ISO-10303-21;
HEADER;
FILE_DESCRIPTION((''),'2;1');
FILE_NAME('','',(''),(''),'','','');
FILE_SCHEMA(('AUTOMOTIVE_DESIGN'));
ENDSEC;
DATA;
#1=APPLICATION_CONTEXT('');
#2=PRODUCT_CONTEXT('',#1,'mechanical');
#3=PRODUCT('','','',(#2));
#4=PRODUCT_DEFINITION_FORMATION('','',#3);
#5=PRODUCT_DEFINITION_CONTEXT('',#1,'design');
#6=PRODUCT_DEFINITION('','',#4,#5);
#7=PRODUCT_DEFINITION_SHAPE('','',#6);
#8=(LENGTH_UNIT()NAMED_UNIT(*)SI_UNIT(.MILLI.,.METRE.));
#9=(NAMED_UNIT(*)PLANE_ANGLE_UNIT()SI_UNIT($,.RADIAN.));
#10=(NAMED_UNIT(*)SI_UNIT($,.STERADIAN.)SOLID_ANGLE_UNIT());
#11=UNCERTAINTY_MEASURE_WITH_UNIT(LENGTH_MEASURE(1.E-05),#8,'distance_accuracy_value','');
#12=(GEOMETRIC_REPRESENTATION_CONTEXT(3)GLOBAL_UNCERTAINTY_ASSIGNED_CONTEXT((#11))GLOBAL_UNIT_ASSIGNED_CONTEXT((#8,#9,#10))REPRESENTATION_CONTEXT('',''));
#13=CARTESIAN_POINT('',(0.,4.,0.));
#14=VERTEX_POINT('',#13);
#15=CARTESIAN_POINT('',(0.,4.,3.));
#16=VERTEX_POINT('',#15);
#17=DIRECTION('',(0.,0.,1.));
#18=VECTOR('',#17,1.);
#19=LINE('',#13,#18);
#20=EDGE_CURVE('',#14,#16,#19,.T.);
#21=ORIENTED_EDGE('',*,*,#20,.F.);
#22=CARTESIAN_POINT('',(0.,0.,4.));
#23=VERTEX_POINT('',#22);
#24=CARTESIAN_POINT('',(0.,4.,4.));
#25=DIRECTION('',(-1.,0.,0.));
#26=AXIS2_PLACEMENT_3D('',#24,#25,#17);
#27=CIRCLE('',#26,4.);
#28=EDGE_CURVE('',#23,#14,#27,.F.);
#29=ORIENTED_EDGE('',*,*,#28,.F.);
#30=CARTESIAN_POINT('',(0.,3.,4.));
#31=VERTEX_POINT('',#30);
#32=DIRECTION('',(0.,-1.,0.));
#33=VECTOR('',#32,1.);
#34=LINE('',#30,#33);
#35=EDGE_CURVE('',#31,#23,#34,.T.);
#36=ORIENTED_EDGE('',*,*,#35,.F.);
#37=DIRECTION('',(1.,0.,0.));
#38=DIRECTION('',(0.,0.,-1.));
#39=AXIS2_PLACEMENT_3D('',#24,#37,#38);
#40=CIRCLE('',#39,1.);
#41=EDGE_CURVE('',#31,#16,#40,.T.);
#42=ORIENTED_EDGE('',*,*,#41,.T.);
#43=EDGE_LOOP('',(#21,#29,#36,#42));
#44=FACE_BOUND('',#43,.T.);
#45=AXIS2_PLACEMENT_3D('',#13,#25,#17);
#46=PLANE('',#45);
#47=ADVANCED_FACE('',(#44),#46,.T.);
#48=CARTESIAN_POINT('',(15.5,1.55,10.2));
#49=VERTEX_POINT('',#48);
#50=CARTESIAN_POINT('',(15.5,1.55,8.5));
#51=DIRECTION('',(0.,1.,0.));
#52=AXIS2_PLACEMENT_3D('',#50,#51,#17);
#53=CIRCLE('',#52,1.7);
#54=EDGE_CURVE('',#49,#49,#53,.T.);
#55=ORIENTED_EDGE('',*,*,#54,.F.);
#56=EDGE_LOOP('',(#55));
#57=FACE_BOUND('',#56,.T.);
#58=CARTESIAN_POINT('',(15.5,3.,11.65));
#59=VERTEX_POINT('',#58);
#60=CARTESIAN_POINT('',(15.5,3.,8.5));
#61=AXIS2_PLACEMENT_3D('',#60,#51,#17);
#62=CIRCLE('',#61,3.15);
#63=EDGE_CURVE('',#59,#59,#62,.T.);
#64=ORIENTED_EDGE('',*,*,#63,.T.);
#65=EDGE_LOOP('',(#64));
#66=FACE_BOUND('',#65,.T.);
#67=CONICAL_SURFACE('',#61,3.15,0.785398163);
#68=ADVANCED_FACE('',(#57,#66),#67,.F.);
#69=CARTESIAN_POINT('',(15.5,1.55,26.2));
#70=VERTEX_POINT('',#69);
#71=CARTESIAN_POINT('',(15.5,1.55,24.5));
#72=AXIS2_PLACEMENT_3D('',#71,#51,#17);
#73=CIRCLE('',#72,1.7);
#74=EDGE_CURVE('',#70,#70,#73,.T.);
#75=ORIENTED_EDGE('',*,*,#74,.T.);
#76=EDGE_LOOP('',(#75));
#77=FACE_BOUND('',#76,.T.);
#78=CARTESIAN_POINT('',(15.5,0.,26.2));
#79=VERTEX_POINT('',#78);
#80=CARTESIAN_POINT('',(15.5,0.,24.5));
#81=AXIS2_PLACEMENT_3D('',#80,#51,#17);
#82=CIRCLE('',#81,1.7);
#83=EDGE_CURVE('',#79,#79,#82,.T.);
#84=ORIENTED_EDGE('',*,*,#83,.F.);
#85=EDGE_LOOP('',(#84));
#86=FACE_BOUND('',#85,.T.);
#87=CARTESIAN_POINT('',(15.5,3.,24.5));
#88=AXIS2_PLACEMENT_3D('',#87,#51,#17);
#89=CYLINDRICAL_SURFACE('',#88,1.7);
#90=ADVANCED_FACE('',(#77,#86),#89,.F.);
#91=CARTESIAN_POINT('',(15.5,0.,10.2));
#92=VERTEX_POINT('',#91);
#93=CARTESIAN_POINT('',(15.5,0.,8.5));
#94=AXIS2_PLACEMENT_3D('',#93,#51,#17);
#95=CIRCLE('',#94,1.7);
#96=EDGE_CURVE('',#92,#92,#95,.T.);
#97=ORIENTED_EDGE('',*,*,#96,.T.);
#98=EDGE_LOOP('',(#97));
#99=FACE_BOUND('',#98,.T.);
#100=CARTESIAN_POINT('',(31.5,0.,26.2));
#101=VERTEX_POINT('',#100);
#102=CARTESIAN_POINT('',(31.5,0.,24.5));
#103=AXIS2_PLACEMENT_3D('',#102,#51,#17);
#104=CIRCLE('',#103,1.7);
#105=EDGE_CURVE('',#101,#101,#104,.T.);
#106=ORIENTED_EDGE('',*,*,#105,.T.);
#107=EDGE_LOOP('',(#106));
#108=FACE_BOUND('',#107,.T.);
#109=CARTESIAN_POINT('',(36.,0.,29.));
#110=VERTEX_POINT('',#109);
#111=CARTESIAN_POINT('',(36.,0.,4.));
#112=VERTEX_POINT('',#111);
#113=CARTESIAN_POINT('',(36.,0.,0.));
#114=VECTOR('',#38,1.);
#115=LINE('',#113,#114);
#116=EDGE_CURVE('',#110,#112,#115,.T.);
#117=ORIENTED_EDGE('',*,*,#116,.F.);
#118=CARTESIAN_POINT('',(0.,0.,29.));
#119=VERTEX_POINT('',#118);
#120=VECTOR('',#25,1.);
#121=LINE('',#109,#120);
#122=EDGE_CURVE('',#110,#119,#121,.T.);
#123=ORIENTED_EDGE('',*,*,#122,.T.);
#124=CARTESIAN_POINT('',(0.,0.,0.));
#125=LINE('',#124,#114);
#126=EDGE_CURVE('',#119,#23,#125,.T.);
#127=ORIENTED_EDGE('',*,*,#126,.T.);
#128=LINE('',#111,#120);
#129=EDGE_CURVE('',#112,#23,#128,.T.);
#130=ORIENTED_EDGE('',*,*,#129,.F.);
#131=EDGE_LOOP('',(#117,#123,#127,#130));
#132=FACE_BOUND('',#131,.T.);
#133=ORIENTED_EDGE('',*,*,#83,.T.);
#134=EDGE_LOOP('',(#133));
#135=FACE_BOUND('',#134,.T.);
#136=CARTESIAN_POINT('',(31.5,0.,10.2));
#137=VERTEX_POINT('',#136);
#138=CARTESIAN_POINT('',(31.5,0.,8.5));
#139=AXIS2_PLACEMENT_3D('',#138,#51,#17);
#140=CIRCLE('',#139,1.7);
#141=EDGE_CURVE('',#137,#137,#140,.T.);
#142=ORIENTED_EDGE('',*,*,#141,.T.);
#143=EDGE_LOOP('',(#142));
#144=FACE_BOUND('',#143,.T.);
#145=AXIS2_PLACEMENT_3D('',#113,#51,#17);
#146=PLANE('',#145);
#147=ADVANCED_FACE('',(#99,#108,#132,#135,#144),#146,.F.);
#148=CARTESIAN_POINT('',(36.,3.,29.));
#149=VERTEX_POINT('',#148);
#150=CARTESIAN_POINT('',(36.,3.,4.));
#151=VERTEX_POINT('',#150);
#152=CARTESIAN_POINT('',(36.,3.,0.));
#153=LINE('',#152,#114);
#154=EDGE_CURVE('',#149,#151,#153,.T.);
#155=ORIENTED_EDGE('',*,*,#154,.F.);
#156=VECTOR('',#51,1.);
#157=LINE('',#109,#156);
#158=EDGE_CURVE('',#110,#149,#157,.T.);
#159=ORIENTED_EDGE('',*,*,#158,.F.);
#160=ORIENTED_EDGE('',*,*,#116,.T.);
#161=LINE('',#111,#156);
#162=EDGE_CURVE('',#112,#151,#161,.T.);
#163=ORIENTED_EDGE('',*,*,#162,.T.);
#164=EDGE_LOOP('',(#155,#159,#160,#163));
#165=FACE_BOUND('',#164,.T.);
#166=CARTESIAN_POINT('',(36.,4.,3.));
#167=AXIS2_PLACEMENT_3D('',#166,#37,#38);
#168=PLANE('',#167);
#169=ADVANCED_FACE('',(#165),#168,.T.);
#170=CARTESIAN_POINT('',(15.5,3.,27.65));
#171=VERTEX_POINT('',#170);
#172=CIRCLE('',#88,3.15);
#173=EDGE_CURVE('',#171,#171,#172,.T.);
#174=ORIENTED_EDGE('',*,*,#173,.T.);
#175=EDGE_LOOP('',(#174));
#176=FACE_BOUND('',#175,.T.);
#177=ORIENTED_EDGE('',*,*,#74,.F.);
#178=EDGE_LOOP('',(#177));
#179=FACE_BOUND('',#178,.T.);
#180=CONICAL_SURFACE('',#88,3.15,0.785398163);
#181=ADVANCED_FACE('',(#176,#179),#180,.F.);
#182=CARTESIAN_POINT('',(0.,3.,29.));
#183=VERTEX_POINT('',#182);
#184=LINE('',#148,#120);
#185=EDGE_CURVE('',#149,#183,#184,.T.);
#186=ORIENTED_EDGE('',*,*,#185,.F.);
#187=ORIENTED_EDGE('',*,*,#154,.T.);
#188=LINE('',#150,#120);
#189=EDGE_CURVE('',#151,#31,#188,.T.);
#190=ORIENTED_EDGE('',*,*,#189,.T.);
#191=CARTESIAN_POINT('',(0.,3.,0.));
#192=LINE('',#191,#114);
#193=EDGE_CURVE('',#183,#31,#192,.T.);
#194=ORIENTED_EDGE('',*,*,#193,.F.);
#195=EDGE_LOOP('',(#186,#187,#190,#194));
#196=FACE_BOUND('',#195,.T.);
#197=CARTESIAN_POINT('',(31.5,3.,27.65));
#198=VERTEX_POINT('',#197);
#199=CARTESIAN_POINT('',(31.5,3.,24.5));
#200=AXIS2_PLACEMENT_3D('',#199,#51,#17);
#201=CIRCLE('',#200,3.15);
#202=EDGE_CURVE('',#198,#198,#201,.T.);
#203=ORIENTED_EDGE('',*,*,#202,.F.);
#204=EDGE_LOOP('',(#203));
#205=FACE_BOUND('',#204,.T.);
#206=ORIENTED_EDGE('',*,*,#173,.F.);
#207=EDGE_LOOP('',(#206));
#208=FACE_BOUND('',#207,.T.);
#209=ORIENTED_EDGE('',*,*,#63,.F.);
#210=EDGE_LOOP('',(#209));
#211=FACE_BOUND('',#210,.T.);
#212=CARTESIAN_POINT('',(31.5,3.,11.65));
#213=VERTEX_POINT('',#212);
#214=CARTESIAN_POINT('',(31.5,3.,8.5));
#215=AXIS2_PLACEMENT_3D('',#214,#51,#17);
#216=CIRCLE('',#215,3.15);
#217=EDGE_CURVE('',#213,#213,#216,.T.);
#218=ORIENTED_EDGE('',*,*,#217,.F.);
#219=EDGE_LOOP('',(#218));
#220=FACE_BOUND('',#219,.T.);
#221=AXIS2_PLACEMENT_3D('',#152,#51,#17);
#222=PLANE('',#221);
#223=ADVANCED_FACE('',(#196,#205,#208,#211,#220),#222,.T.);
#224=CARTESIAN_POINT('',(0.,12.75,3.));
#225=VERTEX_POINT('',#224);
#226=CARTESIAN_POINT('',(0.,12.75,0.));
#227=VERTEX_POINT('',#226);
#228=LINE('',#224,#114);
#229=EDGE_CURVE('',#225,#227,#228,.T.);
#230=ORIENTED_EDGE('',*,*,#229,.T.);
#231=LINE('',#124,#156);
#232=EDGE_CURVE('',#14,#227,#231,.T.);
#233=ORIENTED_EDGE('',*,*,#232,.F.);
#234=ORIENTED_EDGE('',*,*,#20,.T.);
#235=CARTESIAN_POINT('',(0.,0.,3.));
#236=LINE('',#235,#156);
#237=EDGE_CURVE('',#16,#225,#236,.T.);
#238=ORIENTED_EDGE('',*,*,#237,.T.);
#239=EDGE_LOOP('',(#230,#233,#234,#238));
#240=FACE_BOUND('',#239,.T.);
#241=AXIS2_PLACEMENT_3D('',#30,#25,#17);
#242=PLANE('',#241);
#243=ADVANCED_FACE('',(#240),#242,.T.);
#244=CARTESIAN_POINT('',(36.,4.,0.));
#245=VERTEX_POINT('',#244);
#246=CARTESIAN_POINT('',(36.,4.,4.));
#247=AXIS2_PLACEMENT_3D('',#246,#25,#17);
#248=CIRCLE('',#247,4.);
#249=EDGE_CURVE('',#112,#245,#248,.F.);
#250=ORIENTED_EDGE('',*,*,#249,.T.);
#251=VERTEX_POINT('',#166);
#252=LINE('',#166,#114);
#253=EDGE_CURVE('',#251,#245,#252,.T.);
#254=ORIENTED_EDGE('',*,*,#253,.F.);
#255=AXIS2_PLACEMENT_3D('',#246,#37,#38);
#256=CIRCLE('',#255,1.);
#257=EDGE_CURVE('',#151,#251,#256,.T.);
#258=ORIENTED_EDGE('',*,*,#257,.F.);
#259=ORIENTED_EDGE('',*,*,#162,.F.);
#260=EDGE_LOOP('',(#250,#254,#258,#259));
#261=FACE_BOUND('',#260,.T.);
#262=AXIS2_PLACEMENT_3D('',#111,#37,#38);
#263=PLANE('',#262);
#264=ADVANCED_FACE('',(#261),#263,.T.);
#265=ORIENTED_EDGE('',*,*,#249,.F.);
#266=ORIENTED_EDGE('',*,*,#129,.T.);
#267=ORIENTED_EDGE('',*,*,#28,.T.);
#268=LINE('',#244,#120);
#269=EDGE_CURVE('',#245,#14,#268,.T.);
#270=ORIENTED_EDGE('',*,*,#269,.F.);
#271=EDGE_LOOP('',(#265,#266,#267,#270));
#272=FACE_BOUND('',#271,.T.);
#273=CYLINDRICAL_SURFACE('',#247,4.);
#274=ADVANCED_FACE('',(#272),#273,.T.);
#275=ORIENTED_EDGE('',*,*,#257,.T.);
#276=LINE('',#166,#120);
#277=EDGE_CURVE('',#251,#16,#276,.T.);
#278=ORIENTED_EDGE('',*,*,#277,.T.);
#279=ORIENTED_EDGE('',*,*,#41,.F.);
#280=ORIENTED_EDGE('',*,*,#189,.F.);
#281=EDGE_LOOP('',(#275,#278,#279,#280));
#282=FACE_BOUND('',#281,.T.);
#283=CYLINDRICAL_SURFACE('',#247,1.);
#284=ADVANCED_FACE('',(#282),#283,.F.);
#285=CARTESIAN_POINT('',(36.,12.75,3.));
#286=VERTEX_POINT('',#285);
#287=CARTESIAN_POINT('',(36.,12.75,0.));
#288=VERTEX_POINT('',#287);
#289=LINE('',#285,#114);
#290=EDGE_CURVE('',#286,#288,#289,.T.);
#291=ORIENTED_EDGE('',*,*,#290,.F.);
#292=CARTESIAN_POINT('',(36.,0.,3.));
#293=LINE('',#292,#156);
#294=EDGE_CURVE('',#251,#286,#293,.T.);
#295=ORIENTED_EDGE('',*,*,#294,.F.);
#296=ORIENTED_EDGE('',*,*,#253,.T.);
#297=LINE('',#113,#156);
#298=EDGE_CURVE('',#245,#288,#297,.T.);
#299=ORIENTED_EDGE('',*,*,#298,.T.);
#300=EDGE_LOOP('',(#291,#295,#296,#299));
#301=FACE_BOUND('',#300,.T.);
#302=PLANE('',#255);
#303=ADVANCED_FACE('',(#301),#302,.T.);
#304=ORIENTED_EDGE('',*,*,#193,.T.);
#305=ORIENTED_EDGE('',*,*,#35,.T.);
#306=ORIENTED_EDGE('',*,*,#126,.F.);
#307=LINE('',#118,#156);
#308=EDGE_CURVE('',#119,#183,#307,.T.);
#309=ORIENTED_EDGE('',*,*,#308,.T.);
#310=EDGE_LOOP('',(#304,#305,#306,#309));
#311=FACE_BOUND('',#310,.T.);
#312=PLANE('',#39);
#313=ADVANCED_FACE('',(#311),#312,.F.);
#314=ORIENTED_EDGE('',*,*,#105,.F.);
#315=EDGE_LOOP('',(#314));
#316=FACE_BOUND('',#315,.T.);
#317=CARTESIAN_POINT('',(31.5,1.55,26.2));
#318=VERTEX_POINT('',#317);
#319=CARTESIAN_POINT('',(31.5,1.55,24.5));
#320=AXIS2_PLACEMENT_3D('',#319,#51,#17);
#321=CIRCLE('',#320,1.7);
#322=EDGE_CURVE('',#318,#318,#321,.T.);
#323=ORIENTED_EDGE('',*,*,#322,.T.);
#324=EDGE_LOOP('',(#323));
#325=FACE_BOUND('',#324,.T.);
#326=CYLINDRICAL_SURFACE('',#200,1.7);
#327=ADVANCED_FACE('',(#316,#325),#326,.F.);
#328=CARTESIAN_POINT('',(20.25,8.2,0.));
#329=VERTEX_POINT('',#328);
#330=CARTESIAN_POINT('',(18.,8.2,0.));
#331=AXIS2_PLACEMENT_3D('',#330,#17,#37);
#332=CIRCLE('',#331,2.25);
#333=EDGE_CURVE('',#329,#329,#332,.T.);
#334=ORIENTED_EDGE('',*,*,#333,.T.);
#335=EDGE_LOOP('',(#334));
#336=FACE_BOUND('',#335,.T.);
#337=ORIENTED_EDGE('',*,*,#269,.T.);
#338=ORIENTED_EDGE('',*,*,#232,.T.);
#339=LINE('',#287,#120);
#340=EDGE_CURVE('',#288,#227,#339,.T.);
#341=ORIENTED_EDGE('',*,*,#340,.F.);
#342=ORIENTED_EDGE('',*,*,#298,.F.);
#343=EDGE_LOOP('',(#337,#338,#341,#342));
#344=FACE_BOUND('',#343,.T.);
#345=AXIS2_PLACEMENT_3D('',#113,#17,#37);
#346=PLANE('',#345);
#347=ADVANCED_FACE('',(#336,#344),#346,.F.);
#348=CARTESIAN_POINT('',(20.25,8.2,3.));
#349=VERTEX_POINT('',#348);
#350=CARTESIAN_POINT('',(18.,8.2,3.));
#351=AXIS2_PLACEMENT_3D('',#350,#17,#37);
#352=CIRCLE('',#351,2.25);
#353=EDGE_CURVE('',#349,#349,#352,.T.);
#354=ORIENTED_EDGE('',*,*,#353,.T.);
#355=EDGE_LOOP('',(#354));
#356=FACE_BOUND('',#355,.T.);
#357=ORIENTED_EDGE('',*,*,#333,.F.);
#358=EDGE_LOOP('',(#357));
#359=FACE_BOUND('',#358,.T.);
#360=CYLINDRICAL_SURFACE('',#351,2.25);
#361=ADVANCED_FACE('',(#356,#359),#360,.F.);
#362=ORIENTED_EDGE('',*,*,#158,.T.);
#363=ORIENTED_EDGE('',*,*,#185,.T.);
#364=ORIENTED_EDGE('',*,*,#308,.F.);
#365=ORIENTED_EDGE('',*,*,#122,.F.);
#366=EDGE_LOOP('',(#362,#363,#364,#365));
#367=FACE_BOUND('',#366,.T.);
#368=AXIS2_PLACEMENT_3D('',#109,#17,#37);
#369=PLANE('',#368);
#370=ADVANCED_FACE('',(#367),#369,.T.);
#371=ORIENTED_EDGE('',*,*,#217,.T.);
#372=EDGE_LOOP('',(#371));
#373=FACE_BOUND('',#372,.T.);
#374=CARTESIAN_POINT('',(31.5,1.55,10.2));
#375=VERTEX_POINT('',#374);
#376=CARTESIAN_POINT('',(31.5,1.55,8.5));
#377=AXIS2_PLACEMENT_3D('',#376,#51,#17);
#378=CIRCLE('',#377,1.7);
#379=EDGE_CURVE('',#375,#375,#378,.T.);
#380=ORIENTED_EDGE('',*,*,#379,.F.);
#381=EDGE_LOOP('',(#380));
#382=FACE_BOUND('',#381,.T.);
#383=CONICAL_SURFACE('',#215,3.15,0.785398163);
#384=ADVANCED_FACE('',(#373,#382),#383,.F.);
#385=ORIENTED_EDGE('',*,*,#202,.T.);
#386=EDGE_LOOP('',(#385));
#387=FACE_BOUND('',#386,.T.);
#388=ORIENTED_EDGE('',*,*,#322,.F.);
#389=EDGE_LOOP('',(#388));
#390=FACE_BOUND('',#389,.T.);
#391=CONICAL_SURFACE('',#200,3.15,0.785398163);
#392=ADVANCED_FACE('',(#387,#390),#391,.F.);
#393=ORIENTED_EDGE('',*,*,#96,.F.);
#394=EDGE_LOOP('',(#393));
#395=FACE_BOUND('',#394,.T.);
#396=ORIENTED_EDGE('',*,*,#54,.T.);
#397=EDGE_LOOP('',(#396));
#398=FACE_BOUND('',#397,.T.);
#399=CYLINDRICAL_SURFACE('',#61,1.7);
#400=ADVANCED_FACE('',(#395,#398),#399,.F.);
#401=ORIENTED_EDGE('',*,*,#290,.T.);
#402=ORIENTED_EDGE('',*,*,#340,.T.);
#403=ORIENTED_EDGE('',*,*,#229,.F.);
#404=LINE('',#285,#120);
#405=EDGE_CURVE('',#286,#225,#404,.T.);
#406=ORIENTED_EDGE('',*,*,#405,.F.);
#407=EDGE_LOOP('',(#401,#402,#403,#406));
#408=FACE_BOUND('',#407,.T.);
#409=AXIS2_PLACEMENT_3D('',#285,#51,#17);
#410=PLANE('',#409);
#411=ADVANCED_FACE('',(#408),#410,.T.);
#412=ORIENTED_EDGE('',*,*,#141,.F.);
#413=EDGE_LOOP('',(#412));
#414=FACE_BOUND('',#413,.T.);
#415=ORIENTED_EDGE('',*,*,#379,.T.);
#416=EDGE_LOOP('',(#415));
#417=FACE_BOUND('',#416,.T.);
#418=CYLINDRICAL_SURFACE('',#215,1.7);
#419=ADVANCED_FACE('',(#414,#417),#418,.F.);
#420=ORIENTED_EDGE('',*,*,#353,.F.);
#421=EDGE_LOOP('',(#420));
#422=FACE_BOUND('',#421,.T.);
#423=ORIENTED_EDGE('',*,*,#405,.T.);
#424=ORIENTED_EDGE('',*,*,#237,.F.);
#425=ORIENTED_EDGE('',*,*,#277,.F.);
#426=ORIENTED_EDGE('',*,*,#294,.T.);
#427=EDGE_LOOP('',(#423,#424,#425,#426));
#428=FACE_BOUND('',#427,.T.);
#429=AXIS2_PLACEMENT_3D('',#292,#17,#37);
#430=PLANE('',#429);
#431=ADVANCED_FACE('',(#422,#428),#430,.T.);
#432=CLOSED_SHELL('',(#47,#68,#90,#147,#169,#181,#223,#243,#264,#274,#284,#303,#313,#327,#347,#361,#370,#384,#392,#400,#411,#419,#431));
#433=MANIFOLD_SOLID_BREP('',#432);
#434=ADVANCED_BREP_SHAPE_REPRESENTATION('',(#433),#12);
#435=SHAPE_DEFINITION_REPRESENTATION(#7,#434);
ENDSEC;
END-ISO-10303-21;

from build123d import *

# Parameters (mm, degrees)
T_LE_DE_BASE_PLI_E1_DEPTH                   = 36
FRAISAGE_POUR_VIS_T_TE_FRAIS_E_M31_AT_COUNT = 2
FRAISAGE_POUR_VIS_T_TE_FRAIS_E_M31_AT_PITCH = 16
FRAISAGE_POUR_VIS_T_TE_FRAIS_E_M31_2_COUNT  = 2
FRAISAGE_POUR_VIS_T_TE_FRAIS_E_M31_2_PITCH  = 22.627416998
FRAISAGE_POUR_VIS_T_TE_FRAIS_E_M31_3_COUNT  = 2
FRAISAGE_POUR_VIS_T_TE_FRAIS_E_M31_3_PITCH  = 16
D_GAGEMENT_M41_D                            = 4.5


# Sheet-metal steps are written as plain solids
with BuildPart() as part:
    # Esquisse1 → Tôle de base pliée1 (new body)
    with BuildSketch(Plane(origin=(0, 0, 0), x_dir=(0, 0, -1), z_dir=(1, 0, 0))):
        with BuildLine():
            Line((0, 12.75), (0, 4))
            ThreePointArc((0, 4), (-1.171572875, 1.171572875), (-4, 0))
            Line((-4, 0), (-29, 0))
            Line((-29, 0), (-29, 3))
            Line((-29, 3), (-4, 3))
            ThreePointArc((-4, 3), (-3.292893219, 3.292893219), (-3, 4))
            Line((-3, 4), (-3, 12.75))
            Line((-3, 12.75), (0, 12.75))
        make_face()
    extrude(amount=T_LE_DE_BASE_PLI_E1_DEPTH)

    # Esquisse7 → Fraisage pour vis à tête fraisée M31 (revolve, cut)
    with BuildSketch(Plane(origin=(15.5, 3, 24.5), x_dir=(0, 0, 1), z_dir=(1, 0, 0))):
        Polygon((0, 0), (0, 3), (1.7, 3), (1.7, 1.45), (3.15, 0), align=None)
    fraisage_pour_vis_t_te_frais_e_m31 = revolve(axis=Axis((15.5, 9.35, 24.5), (0, -1, 0)), mode=Mode.SUBTRACT)

    # Fraisage pour vis à tête fraisée M31 at: Fraisage pour vis à tête fraisée M31 ×2
    with Locations(*[(0, 0, -i * FRAISAGE_POUR_VIS_T_TE_FRAIS_E_M31_AT_PITCH) for i in range(1, FRAISAGE_POUR_VIS_T_TE_FRAIS_E_M31_AT_COUNT)]):
        add(fraisage_pour_vis_t_te_frais_e_m31, mode=Mode.SUBTRACT)

    # Fraisage pour vis _ t_te frais_e M31 2: Fraisage pour vis à tête fraisée M31 ×2
    with Locations(*[Vector(0.7071067811865476, 0, -0.7071067811865476) * (i * FRAISAGE_POUR_VIS_T_TE_FRAIS_E_M31_2_PITCH) for i in range(1, FRAISAGE_POUR_VIS_T_TE_FRAIS_E_M31_2_COUNT)]):
        add(fraisage_pour_vis_t_te_frais_e_m31, mode=Mode.SUBTRACT)

    # Fraisage pour vis _ t_te frais_e M31 3: Fraisage pour vis à tête fraisée M31 ×2
    with Locations(*[(i * FRAISAGE_POUR_VIS_T_TE_FRAIS_E_M31_3_PITCH, 0, 0) for i in range(1, FRAISAGE_POUR_VIS_T_TE_FRAIS_E_M31_3_COUNT)]):
        add(fraisage_pour_vis_t_te_frais_e_m31, mode=Mode.SUBTRACT)

    # Dégagement M41 (through all)
    with Locations(Plane.XY.offset(3)):
        with Locations((18, 8.2)):
            Hole(D_GAGEMENT_M41_D / 2)


solid = part.part
